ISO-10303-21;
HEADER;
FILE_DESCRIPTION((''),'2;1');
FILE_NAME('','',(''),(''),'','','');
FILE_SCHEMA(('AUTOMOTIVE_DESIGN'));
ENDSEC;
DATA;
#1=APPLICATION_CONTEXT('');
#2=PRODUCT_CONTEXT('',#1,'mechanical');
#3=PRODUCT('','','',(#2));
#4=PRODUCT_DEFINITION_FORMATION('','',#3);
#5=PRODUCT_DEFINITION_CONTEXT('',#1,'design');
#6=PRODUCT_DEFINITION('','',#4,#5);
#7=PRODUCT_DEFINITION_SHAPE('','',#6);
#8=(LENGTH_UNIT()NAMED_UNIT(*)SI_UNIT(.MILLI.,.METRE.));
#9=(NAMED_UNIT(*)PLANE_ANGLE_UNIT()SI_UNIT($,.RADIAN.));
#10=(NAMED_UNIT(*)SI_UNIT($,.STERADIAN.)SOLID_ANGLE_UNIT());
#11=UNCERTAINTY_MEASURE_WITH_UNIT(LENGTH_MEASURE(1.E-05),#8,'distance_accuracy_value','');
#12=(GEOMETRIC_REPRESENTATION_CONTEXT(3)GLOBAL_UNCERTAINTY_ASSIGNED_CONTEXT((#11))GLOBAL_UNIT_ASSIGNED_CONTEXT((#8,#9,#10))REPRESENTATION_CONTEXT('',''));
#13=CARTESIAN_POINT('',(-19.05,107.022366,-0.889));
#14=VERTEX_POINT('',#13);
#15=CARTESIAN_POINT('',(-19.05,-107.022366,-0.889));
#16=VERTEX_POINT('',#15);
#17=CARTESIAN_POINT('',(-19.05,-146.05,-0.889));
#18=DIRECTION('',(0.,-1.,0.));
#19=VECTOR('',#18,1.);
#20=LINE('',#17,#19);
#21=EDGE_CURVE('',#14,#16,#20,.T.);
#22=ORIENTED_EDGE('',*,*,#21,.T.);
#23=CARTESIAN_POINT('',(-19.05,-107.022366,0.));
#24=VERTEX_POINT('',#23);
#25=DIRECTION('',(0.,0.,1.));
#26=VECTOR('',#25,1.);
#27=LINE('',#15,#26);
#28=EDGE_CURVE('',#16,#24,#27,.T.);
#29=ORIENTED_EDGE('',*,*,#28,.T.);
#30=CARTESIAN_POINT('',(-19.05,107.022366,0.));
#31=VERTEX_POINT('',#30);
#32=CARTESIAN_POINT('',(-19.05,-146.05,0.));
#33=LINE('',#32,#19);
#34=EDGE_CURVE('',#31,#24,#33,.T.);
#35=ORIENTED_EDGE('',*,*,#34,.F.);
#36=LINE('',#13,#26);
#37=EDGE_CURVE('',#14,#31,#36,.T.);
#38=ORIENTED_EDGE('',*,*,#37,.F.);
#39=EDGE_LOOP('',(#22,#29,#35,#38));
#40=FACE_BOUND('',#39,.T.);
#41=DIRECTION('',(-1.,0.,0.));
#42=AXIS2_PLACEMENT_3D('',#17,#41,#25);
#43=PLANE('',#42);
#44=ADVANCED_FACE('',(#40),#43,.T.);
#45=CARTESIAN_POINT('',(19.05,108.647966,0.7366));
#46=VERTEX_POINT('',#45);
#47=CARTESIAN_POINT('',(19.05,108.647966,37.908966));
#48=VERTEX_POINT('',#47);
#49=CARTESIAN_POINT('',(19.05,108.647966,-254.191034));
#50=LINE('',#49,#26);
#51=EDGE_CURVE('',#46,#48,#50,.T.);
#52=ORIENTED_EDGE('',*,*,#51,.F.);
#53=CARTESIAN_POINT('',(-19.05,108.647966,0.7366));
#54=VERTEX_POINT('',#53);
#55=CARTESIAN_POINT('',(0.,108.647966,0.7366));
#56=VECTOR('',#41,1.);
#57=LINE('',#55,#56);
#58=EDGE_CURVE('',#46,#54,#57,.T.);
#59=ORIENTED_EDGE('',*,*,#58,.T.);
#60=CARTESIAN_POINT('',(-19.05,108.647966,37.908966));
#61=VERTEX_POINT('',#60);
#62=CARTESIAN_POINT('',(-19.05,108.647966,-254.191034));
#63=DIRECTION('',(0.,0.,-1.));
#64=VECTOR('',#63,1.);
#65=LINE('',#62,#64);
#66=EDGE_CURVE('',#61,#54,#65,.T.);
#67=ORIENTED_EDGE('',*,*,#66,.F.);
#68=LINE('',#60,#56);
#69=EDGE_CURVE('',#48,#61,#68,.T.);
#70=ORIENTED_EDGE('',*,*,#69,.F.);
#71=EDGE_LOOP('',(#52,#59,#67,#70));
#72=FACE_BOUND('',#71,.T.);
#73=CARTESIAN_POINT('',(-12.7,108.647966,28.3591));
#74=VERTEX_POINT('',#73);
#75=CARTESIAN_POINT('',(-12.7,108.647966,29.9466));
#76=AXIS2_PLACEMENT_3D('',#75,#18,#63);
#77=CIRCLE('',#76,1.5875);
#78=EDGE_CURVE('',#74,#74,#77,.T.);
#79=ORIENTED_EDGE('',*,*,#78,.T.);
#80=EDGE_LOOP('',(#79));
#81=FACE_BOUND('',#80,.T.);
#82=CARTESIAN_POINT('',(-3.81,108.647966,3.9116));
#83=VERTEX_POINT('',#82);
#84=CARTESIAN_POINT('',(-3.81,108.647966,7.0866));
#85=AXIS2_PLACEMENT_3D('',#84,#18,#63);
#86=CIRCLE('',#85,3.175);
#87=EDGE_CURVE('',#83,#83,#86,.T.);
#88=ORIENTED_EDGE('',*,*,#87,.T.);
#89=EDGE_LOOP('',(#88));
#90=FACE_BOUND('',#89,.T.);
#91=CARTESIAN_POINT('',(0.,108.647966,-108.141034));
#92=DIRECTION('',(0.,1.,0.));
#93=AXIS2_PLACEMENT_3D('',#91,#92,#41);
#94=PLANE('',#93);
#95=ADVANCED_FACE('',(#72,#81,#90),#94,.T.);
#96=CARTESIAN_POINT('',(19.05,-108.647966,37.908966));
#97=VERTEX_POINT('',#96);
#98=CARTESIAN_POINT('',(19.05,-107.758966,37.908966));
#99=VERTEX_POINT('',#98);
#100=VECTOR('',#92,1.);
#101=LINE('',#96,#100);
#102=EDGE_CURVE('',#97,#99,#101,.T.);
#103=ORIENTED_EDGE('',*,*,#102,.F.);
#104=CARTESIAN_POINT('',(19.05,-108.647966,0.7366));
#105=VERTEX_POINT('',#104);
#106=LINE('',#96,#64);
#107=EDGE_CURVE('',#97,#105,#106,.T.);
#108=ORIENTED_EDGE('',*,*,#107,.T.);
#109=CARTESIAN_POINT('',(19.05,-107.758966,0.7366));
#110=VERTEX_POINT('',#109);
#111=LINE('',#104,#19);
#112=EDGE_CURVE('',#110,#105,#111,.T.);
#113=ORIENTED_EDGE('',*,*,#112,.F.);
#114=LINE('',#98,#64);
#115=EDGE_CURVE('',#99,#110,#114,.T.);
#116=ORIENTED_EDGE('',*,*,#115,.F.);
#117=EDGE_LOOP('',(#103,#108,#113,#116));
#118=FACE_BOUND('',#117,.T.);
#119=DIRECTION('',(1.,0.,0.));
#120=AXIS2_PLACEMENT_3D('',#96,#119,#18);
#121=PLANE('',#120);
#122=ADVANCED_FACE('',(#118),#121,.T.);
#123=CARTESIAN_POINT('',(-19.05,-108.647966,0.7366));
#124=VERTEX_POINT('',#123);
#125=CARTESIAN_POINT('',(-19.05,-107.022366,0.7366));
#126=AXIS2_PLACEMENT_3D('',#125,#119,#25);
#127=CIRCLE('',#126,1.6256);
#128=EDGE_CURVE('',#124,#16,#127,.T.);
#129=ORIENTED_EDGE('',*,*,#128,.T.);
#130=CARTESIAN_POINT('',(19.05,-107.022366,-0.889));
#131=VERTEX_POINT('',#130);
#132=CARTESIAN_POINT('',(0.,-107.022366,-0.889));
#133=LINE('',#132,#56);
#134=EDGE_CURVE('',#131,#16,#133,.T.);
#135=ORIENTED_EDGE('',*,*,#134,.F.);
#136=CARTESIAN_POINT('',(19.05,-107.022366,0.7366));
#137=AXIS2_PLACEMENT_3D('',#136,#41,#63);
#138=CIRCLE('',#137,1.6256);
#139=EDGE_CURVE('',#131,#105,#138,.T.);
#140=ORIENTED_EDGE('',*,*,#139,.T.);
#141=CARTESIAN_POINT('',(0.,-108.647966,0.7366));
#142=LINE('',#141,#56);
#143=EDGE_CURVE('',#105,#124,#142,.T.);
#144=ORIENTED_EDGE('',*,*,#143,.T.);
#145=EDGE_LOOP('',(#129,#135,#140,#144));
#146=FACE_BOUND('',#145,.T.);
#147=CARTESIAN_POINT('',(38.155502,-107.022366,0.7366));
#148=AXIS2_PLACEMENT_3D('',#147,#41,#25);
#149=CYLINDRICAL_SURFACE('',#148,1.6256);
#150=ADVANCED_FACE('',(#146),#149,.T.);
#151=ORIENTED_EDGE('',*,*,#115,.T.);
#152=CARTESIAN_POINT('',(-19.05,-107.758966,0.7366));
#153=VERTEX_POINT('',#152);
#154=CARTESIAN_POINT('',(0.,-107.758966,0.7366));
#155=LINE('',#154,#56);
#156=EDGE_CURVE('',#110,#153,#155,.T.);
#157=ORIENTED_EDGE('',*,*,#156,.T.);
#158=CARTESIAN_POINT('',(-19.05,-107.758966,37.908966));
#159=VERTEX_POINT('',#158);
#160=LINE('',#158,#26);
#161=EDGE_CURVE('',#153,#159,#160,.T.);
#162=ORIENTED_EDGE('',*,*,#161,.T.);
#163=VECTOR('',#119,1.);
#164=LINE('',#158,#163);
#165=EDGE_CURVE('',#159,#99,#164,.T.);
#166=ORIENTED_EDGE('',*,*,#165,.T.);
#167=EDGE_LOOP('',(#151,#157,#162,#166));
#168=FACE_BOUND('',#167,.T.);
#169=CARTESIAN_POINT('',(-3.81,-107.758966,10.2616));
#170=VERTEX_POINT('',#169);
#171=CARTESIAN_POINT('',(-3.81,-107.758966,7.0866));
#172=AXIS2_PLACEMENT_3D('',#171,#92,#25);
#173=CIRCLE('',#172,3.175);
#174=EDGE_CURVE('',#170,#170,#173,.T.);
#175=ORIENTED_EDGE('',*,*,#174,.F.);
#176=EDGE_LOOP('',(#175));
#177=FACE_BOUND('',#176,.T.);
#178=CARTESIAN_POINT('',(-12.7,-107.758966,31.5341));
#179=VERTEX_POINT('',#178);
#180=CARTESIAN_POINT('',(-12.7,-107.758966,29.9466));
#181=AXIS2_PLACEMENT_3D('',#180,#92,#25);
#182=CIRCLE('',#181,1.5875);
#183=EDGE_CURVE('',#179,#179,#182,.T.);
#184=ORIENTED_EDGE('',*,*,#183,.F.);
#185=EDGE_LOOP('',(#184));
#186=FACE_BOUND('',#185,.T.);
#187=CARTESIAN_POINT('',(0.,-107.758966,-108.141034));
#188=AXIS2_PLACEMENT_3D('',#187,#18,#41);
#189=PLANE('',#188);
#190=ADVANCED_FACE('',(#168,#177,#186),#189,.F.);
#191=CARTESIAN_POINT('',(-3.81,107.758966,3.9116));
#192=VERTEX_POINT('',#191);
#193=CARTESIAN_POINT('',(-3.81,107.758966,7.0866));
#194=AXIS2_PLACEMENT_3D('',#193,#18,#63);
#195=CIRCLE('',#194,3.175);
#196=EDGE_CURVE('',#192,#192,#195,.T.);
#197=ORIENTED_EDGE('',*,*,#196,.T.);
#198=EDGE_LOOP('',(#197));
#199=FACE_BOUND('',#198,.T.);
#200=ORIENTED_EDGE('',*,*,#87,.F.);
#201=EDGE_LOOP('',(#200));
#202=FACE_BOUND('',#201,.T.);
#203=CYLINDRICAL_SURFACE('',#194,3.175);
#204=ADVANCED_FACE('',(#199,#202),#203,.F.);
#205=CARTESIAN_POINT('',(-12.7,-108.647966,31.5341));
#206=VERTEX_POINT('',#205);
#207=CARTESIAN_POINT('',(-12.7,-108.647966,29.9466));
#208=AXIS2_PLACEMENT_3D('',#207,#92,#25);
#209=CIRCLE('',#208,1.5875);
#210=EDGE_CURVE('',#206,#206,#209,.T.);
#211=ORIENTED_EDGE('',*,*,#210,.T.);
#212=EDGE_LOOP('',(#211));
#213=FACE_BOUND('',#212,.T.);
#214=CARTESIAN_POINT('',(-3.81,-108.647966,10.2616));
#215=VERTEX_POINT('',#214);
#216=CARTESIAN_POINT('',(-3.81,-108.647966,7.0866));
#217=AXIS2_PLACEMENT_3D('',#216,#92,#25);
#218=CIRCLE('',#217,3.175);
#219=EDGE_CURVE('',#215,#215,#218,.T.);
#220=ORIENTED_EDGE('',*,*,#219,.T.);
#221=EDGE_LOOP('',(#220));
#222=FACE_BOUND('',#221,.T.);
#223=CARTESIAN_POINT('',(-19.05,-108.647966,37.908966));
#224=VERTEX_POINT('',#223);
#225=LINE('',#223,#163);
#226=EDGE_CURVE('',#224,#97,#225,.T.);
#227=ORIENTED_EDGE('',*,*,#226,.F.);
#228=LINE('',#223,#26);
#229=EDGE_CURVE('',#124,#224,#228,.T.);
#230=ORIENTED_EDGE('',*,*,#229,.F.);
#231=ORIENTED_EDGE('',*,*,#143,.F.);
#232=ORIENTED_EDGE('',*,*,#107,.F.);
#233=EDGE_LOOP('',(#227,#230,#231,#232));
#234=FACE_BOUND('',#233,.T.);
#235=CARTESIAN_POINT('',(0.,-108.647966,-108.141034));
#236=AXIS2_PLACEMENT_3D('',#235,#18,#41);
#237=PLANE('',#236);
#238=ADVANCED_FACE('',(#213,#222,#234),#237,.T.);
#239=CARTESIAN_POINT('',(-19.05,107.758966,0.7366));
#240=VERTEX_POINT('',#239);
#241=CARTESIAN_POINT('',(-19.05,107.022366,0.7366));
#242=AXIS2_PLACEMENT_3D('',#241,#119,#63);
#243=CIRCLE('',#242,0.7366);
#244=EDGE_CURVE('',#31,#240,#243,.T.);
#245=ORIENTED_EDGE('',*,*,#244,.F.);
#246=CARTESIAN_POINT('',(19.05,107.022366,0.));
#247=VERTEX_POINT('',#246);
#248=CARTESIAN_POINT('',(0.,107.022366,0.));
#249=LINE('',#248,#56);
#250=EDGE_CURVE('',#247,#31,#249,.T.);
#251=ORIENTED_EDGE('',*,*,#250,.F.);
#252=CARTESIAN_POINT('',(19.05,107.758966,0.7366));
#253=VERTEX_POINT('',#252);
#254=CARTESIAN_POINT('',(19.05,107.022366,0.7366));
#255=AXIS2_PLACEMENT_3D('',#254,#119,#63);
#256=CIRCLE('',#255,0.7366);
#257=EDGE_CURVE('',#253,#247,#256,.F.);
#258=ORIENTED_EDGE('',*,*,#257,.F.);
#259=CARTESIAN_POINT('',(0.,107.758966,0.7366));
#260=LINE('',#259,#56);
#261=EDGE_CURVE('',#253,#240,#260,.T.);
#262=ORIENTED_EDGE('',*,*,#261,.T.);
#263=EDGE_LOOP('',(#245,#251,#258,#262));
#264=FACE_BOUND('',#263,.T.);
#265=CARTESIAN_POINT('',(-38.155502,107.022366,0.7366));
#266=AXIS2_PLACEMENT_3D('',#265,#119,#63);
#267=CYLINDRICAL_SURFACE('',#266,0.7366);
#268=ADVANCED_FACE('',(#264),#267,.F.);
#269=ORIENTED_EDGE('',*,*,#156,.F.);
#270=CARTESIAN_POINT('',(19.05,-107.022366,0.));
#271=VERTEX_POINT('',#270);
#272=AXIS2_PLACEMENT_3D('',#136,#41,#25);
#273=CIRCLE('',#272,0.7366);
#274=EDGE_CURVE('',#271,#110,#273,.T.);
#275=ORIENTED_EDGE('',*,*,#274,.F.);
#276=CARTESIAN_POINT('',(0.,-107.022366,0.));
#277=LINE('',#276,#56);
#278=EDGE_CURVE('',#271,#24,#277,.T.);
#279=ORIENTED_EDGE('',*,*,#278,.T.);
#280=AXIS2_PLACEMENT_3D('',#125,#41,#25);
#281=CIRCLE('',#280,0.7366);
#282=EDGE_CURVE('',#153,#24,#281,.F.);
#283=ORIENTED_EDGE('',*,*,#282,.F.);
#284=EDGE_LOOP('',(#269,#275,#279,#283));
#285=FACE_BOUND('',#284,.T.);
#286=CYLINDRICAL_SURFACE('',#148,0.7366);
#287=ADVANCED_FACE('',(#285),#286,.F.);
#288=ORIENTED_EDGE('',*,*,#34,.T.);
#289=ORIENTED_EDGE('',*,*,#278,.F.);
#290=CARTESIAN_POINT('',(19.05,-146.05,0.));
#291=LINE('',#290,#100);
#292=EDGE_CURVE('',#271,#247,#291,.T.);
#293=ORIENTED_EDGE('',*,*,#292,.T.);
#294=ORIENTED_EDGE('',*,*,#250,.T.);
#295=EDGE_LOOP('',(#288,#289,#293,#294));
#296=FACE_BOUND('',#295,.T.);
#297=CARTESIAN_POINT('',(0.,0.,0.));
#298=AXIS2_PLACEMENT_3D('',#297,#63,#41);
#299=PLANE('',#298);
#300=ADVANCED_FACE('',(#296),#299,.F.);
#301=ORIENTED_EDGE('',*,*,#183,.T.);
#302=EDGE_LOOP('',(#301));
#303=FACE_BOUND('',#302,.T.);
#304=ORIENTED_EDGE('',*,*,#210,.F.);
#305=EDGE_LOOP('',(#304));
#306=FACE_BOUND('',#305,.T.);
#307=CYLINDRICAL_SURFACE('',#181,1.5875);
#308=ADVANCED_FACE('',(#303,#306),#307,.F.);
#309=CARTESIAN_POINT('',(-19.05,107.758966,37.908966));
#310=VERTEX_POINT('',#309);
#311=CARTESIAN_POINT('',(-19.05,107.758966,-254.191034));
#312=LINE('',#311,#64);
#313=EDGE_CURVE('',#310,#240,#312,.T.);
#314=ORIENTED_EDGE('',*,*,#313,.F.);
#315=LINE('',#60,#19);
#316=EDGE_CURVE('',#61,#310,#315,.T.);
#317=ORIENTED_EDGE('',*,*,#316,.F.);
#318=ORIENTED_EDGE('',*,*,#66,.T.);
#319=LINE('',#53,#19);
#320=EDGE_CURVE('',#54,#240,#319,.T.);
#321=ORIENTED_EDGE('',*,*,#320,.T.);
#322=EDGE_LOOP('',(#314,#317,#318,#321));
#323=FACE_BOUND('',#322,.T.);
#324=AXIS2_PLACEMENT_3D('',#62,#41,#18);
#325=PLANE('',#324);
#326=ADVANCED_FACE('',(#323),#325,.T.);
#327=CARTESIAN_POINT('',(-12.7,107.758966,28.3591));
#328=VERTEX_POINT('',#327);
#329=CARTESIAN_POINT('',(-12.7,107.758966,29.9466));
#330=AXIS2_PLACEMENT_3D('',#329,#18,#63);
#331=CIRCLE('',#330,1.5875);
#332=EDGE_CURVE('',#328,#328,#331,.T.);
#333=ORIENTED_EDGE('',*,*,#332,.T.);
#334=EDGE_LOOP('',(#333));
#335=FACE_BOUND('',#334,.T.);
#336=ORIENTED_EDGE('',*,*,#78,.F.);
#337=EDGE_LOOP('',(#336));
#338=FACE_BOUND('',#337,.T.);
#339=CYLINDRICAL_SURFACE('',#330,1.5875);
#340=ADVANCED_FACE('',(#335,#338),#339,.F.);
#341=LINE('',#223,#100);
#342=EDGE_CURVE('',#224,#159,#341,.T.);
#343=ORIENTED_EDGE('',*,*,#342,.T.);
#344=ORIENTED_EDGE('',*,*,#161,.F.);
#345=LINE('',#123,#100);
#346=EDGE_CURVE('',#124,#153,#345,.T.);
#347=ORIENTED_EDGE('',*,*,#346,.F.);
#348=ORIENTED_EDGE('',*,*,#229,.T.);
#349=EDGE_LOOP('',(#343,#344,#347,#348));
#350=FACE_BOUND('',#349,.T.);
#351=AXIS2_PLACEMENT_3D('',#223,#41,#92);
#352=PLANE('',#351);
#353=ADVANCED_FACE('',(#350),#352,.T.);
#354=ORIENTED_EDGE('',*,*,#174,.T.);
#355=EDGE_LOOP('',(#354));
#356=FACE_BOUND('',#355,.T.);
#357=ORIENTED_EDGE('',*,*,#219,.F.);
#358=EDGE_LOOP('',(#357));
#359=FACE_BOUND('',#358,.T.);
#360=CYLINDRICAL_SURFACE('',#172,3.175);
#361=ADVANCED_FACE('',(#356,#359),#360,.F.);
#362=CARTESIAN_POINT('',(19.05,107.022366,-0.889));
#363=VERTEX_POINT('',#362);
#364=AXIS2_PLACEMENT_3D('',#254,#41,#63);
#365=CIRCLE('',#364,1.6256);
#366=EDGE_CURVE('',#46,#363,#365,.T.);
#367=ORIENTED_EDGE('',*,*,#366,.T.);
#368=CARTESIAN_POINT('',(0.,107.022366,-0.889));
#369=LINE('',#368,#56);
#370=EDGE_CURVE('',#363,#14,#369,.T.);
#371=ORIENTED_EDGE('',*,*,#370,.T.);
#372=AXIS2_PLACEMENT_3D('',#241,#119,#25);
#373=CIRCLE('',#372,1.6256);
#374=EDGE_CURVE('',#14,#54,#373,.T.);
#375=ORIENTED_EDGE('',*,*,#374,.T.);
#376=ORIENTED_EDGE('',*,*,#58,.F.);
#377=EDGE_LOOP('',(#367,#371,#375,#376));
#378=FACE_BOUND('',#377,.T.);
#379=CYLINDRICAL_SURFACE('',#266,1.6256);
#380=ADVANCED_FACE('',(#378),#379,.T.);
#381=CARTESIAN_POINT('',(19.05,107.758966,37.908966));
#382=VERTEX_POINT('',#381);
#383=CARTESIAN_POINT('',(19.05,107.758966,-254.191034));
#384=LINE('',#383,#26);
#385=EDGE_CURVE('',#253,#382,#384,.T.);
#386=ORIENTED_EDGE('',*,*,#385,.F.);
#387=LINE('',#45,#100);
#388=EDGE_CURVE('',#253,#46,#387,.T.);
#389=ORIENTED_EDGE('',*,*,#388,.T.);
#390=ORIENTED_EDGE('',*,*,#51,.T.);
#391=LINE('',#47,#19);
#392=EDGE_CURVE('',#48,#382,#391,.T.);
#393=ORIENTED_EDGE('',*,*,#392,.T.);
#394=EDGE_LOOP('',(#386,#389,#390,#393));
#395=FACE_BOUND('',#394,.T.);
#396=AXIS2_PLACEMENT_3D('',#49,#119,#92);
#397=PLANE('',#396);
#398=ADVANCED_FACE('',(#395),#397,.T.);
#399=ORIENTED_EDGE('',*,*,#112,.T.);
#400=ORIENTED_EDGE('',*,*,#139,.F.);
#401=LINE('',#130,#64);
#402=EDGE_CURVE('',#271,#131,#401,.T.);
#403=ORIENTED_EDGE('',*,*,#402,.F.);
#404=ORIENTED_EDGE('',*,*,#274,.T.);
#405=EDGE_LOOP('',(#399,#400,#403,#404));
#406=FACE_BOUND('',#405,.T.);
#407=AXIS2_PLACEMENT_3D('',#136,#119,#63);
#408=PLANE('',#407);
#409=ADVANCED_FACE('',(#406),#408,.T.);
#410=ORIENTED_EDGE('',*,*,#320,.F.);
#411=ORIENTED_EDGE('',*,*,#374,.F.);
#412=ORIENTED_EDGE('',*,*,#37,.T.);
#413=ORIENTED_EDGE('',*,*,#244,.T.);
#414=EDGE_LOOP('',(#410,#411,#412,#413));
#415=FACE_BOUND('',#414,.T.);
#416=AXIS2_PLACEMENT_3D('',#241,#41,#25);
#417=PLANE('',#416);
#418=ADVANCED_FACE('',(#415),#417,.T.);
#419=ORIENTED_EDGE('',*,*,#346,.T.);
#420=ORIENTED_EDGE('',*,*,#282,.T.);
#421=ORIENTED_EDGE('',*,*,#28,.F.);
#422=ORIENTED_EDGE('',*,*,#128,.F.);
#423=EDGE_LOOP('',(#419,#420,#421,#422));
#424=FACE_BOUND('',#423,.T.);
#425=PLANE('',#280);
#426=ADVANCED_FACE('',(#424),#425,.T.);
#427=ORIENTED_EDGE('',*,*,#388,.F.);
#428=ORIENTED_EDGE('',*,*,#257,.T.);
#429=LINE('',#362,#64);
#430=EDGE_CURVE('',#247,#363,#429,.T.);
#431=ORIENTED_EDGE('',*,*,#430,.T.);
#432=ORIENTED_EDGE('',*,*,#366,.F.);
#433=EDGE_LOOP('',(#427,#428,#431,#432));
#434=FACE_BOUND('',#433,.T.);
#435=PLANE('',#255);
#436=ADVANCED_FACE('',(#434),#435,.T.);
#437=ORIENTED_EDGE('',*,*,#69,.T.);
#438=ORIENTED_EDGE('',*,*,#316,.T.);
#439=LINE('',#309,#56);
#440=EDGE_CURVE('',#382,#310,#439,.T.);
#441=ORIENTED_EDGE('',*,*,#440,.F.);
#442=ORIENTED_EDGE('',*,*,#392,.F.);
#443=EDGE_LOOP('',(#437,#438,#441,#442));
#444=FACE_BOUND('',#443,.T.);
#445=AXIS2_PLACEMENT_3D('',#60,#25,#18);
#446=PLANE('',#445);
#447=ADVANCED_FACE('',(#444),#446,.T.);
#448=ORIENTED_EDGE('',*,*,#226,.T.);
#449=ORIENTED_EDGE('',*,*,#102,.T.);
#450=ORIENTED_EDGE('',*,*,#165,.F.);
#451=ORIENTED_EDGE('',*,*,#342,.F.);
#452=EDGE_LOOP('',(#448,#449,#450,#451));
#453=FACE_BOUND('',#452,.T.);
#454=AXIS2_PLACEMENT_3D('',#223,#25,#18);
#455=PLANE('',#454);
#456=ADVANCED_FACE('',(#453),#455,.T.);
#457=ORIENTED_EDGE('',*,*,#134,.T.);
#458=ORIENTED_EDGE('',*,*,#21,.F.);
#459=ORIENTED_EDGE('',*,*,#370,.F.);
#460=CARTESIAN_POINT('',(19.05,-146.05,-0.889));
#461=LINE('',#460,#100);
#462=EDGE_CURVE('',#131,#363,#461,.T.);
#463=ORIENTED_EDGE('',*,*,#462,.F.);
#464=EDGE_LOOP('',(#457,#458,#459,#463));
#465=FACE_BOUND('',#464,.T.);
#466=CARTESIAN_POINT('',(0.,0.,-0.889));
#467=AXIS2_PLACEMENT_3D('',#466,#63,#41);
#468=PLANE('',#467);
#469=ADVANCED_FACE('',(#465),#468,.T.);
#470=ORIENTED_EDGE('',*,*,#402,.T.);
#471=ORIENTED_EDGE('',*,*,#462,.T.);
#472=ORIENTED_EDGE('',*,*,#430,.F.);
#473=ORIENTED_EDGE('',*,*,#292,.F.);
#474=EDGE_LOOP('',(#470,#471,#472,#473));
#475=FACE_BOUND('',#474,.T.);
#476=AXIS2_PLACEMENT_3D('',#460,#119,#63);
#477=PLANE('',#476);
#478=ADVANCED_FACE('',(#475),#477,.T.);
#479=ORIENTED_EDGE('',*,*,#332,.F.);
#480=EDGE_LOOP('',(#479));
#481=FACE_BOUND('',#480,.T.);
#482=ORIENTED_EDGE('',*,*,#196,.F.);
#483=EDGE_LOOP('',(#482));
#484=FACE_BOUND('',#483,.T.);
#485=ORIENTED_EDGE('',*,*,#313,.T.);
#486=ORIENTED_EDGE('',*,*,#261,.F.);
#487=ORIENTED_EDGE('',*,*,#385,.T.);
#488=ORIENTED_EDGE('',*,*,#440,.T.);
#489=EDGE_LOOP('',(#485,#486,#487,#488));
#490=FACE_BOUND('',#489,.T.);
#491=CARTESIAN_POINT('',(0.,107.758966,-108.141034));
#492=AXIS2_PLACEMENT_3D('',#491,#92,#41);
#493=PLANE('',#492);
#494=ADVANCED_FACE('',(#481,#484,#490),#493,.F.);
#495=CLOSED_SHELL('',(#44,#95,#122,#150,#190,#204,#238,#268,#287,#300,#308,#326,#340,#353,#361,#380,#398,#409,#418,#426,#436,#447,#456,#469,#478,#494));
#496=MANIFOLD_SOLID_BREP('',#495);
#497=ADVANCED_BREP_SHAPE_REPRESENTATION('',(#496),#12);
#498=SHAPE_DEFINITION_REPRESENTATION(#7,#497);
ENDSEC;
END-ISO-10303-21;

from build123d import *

# Parameters (mm, degrees)
SKETCH1_W                        = 38.1
SKETCH1_H                        = 292.1
BASE_FLANGE1_DEPTH               = 0.889
SKETCHED_START                   = -19.05
SKETCHED_BEND5_DEPTH             = 38.1
SKETCHED_BEND5_2_DEPTH           = 38.1
SKETCHED_BEND8_DEPTH             = 38.1
SKETCHED_BEND8_2_DEPTH           = 38.1
F_1_4_0_25_DIAMETER_HOLE4_D      = 6.35
F_1_4_0_25_DIAMETER_HOLE4_DEPTH  = 0.889
F_1_8_0_125_DIAMETER_HOLE1_D     = 3.175
F_1_8_0_125_DIAMETER_HOLE1_DEPTH = 0.889


# Read off the part's stored shape, not the designer's step: Sketched Bend5, Sketched Bend8
# Sheet-metal steps are written as plain solids
with BuildPart() as part:
    # Sketch1 → Base-Flange1 (new body)
    with BuildSketch(Plane.XY):
        Rectangle(SKETCH1_W, SKETCH1_H)
    extrude(amount=-BASE_FLANGE1_DEPTH)

    # Sketched Bend5 outline → Sketched Bend5 (cut)
    with BuildSketch(Plane.YZ.offset(SKETCHED_START)):
        with BuildLine():
            Line((146.05, 0), (108.471502454, 0))
            ThreePointArc((108.471502454, 0), (107.872412816, -0.64903926), (107.022366229, -0.889))
            Line((107.022366229, -0.889), (146.05, -0.889))
            Line((146.05, -0.889), (146.05, 0))
        make_face()
    extrude(amount=SKETCHED_BEND5_DEPTH, mode=Mode.SUBTRACT)

    # Sketched Bend5 2 outline → Sketched Bend5 2 (add)
    with BuildSketch(Plane.YZ.offset(SKETCHED_START)):
        with BuildLine():
            ThreePointArc((108.471502454, 0), (108.603234852, 0.357878789), (108.647966229, 0.7366))
            Line((108.647966229, 0.7366), (108.647966229, 37.908966229))
            Line((108.647966229, 37.908966229), (107.758966229, 37.908966229))
            Line((107.758966229, 37.908966229), (107.758966229, 0.7366))
            ThreePointArc((107.758966229, 0.7366), (107.543221084, 0.215745145), (107.022366229, 0))
            Line((107.022366229, 0), (108.471502454, 0))
        make_face()
    extrude(amount=SKETCHED_BEND5_2_DEPTH)

    # Sketched Bend8 outline → Sketched Bend8 (cut)
    with BuildSketch(Plane.YZ.offset(SKETCHED_START)):
        with BuildLine():
            ThreePointArc((-107.022366229, -0.889), (-107.872412816, -0.64903926), (-108.471502454, 0))
            Line((-108.471502454, 0), (-146.05, 0))
            Line((-146.05, 0), (-146.05, -0.889))
            Line((-146.05, -0.889), (-107.022366229, -0.889))
        make_face()
    extrude(amount=SKETCHED_BEND8_DEPTH, mode=Mode.SUBTRACT)

    # Sketched Bend8 2 outline → Sketched Bend8 2 (add)
    with BuildSketch(Plane.YZ.offset(SKETCHED_START)):
        with BuildLine():
            Line((-107.758966229, 0.7366), (-107.758966229, 37.908966229))
            Line((-107.758966229, 37.908966229), (-108.647966229, 37.908966229))
            Line((-108.647966229, 37.908966229), (-108.647966229, 0.7366))
            ThreePointArc((-108.647966229, 0.7366), (-108.603234852, 0.357878789), (-108.471502454, 0))
            Line((-108.471502454, 0), (-107.022366229, 0))
            ThreePointArc((-107.022366229, 0), (-107.543221084, 0.215745145), (-107.758966229, 0.7366))
        make_face()
    extrude(amount=SKETCHED_BEND8_2_DEPTH)

    # 1/4 (0.25) Diameter Hole4
    with Locations(Plane(origin=(-3.81, 107.758966229, 7.0866), x_dir=(0, 0, -1), z_dir=(0, -1, 0))):
        with Locations((0, 0)):
            f_1_4_0_25_diameter_hole4 = Hole(F_1_4_0_25_DIAMETER_HOLE4_D / 2, depth=F_1_4_0_25_DIAMETER_HOLE4_DEPTH)

    # 1/8 (0.125) Diameter Hole1
    with Locations(Plane(origin=(-12.7, 107.758966229, 29.9466), x_dir=(0, 0, -1), z_dir=(0, -1, 0))):
        with Locations((0, 0)):
            f_1_8_0_125_diameter_hole1 = Hole(F_1_8_0_125_DIAMETER_HOLE1_D / 2, depth=F_1_8_0_125_DIAMETER_HOLE1_DEPTH)

    # Mirror1: 1/4 (0.25) Diameter Hole4, 1/8 (0.125) Diameter Hole1 across plane
    add(f_1_4_0_25_diameter_hole4.mirror(Plane.ZX), mode=Mode.SUBTRACT)
    add(f_1_8_0_125_diameter_hole1.mirror(Plane.ZX), mode=Mode.SUBTRACT)


solid = part.part
